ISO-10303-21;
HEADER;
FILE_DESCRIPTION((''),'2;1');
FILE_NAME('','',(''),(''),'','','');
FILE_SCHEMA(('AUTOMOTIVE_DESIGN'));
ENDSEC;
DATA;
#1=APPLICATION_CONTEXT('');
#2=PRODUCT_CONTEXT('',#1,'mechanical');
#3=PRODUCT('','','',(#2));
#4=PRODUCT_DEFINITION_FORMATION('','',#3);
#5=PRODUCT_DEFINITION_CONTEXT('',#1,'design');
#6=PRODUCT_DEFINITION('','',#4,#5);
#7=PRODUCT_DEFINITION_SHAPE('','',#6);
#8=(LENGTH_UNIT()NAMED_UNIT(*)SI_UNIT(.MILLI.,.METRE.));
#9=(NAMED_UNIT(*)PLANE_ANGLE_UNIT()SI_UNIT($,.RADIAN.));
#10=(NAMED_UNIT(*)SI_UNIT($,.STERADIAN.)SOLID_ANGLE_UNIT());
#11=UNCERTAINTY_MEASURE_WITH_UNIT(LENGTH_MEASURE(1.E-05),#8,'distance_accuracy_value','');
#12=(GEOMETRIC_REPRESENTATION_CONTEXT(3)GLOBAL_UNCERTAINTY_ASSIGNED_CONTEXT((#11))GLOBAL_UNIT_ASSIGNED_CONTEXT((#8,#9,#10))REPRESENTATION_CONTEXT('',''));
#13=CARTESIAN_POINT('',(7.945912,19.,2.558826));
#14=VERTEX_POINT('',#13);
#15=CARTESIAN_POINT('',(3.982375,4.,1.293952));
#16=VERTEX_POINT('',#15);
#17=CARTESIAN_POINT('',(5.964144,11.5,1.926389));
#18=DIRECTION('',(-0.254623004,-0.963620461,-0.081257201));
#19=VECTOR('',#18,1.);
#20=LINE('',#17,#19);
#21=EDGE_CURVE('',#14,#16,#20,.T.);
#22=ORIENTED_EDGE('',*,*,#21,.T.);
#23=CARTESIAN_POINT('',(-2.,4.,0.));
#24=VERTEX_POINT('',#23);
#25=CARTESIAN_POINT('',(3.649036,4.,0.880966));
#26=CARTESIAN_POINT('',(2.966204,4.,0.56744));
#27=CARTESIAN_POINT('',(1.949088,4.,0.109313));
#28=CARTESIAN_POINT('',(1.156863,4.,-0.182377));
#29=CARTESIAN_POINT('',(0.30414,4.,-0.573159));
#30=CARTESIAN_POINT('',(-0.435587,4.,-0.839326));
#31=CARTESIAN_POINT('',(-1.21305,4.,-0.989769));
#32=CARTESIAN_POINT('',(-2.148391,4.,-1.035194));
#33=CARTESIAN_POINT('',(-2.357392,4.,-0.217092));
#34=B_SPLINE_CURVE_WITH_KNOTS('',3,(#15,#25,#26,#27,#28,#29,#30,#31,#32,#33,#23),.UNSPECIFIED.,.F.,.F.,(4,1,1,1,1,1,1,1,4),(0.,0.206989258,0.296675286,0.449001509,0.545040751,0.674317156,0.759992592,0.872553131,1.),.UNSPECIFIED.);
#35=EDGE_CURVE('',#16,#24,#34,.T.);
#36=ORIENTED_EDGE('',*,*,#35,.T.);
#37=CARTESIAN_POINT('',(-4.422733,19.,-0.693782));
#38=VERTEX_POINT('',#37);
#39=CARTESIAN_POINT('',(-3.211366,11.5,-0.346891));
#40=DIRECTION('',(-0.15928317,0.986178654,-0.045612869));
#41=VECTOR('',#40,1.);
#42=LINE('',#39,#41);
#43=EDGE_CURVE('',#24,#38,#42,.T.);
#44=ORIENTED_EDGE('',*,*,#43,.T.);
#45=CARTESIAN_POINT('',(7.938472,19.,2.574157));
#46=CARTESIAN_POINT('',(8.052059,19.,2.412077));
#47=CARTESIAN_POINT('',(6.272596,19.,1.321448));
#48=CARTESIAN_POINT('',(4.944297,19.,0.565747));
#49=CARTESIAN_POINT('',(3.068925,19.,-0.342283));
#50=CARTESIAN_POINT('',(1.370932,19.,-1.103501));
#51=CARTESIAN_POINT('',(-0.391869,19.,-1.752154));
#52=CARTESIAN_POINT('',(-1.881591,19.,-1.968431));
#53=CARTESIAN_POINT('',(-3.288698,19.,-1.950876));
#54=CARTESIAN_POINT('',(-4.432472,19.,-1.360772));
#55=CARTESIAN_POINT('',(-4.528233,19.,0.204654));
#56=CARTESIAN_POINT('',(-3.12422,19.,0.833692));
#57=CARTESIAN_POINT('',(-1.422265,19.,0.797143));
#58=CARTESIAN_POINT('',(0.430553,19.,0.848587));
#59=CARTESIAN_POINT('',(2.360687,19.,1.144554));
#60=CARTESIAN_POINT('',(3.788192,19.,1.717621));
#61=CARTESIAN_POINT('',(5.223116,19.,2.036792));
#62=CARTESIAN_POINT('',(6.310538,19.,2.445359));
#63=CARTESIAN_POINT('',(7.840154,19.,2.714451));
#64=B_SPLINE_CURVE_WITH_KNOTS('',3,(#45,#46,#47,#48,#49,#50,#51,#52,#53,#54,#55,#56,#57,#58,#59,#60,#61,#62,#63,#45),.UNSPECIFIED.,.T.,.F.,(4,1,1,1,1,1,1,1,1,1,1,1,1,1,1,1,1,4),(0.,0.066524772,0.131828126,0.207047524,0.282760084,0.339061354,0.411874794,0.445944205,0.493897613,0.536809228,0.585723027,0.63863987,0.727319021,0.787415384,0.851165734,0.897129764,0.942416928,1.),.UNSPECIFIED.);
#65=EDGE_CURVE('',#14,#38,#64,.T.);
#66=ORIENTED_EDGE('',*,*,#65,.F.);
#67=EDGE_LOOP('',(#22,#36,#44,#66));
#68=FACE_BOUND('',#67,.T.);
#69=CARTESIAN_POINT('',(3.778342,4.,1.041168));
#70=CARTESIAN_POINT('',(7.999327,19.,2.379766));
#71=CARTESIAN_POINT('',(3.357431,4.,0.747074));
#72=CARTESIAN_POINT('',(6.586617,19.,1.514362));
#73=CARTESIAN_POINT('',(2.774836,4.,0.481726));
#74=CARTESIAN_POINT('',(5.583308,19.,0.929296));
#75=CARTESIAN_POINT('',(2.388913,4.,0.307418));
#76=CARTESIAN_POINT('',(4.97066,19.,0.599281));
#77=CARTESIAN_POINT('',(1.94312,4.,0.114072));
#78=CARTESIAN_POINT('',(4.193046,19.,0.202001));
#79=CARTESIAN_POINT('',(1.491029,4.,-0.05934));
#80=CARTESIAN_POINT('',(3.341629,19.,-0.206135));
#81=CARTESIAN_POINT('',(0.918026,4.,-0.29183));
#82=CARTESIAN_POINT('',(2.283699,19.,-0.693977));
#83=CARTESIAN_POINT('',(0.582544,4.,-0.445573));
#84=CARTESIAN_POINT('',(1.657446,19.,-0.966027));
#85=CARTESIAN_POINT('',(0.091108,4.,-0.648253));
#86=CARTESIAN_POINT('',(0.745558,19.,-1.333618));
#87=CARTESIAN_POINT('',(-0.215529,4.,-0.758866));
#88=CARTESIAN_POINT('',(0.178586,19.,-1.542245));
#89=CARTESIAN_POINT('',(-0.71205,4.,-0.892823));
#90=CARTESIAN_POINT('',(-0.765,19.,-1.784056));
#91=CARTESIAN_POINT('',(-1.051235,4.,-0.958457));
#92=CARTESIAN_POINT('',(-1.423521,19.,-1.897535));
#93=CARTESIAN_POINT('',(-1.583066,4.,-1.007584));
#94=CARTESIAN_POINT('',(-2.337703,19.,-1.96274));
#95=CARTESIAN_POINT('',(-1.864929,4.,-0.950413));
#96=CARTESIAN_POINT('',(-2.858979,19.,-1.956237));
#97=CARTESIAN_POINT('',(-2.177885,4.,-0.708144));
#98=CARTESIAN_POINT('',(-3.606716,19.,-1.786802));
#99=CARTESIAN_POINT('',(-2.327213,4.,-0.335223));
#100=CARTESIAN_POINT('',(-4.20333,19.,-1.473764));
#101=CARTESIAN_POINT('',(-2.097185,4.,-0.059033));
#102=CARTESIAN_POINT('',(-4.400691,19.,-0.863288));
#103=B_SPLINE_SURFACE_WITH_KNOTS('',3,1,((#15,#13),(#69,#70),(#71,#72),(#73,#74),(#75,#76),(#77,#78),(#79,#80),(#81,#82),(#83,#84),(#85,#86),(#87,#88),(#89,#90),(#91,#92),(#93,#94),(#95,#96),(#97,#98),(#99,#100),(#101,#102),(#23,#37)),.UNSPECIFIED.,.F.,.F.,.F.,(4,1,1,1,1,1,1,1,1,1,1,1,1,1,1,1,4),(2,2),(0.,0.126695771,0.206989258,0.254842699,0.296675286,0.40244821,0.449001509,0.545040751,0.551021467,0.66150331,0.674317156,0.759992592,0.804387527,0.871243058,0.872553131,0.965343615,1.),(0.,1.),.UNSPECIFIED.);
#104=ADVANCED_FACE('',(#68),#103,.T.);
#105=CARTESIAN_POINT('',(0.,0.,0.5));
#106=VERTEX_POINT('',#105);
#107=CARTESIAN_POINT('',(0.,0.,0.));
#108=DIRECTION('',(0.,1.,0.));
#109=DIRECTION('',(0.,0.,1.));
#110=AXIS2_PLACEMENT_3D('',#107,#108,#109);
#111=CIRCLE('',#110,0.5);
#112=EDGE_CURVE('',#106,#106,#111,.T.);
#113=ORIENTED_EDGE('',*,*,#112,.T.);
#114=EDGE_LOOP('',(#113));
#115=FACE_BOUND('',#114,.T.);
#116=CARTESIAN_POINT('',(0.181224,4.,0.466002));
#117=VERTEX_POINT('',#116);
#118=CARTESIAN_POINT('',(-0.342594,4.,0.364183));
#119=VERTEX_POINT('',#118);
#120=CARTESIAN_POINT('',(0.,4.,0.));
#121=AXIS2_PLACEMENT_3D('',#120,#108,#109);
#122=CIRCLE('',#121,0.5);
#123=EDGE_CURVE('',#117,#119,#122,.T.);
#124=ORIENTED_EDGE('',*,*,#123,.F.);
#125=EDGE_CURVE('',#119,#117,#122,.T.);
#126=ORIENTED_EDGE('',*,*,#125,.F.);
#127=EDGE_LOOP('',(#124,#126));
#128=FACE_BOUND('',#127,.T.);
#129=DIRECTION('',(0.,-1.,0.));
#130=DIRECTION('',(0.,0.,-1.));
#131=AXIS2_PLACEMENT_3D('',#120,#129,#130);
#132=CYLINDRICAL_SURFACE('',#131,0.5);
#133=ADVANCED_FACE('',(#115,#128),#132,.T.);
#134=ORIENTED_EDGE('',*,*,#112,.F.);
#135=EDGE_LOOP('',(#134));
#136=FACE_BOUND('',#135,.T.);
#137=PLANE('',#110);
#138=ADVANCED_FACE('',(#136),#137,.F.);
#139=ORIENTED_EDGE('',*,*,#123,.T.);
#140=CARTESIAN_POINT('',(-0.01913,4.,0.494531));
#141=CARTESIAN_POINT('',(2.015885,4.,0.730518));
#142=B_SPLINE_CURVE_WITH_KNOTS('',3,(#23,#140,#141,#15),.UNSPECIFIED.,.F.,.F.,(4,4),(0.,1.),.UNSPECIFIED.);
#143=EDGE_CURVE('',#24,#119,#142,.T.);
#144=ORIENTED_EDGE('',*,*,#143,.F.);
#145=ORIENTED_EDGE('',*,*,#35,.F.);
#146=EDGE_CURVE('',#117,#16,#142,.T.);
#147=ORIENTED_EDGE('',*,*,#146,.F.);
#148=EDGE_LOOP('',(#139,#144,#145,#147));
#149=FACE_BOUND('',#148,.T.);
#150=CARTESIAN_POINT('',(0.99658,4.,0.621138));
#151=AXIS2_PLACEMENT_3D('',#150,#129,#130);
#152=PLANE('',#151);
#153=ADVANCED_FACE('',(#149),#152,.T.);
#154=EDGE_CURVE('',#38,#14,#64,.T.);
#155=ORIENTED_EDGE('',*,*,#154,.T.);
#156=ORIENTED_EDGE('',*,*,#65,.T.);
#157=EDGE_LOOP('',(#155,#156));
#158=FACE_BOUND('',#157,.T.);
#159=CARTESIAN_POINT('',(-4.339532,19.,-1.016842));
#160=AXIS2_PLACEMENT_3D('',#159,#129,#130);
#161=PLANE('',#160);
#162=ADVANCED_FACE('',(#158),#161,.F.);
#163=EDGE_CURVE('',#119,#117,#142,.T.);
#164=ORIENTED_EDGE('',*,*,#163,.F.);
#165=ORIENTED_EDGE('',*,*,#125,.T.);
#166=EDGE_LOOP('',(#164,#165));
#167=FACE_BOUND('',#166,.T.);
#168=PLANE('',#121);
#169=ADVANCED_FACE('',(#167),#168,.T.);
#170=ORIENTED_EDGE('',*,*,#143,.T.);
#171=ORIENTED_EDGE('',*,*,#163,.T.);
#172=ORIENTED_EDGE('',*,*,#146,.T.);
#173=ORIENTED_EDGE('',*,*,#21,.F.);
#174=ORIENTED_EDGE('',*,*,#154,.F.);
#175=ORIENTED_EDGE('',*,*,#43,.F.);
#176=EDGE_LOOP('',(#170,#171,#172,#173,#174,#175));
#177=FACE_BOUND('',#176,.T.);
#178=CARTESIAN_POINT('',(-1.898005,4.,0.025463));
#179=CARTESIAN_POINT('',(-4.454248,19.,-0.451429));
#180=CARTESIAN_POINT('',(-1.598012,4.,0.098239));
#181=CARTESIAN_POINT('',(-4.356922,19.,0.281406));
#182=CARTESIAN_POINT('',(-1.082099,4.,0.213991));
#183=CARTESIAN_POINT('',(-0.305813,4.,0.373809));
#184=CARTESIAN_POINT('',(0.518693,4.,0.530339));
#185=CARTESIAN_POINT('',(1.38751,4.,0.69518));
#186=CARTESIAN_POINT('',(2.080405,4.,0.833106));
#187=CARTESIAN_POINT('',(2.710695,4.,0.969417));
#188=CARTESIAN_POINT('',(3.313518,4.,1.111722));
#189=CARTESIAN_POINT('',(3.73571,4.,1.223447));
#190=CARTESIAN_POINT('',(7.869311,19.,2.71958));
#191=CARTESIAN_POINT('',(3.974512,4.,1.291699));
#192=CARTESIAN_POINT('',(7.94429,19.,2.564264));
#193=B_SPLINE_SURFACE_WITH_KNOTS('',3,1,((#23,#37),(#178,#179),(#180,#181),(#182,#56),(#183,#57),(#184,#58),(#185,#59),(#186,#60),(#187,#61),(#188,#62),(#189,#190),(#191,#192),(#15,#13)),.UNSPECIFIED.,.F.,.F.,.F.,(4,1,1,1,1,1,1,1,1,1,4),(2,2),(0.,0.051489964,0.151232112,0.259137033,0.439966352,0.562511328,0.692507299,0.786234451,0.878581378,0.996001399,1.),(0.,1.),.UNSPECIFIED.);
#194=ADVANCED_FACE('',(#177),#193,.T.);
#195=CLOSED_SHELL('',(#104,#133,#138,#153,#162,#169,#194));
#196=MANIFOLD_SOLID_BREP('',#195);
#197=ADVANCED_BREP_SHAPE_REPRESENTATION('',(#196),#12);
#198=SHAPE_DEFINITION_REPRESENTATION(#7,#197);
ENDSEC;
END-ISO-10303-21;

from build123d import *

# Parameters (mm, degrees)
SKETCH1_R           = 0.5
BOSS_EXTRUDE1_DEPTH = 4


with BuildPart() as part:
    # Sketch1 → Boss-Extrude1 (new body)
    with BuildSketch(Plane(origin=(0, 0, 0), x_dir=(1, 0, 0), z_dir=(0, 1, 0))):
        with Locations(Location((0, 0, 0), (0, 0, 270))):
            Circle(SKETCH1_R)
    extrude(amount=BOSS_EXTRUDE1_DEPTH)

    # Loft1: read off the stored shape, not the designer's step
    # Loft1: loft between two sections, ruled curve by curve
    loft1_from = [
        Edge.make_bspline([(3.982375398, 4, 1.293952205), (3.778342255, 4, 1.041167834), (3.35743147, 4, 0.747073774), (2.774835702, 4, 0.481725971), (2.388912903, 4, 0.307417574), (1.943119665, 4, 0.114072033), (1.491029323, 4, -0.05934005), (0.918025904, 4, -0.291830044), (0.582544384, 4, -0.445572937), (0.091107981, 4, -0.648252812), (-0.215529223, 4, -0.758866155), (-0.712050383, 4, -0.892823244), (-1.051235123, 4, -0.958457066), (-1.583065933, 4, -1.00758396), (-1.864928757, 4, -0.950412973), (-2.177884928, 4, -0.708144109), (-2.327212912, 4, -0.335223441), (-2.097184928, 4, -0.059033354), (-2, 4, 0)], [0, 0, 0, 0, 0.126695771, 0.206989258, 0.254842699, 0.296675286, 0.40244821, 0.449001509, 0.545040751, 0.551021467, 0.66150331, 0.674317156, 0.759992592, 0.804387527, 0.871243058, 0.872553131, 0.965343615, 1, 1, 1, 1], 3),
        Edge.make_bspline([(-2, 4, 0), (-1.898005082, 4, 0.025463399), (-1.598012325, 4, 0.098239141), (-1.082098728, 4, 0.213990908), (-0.305813383, 4, 0.373809131), (0.518693331, 4, 0.530338625), (1.38750976, 4, 0.695180106), (2.080405352, 4, 0.833106398), (2.710695257, 4, 0.969417149), (3.313517993, 4, 1.111722031), (3.735710336, 4, 1.223446834), (3.974512186, 4, 1.291699256), (3.982375398, 4, 1.293952205)], [0, 0, 0, 0, 0.051489964, 0.151232112, 0.259137033, 0.439966352, 0.562511328, 0.692507299, 0.786234451, 0.878581378, 0.996001399, 1, 1, 1, 1], 3),
    ]
    loft1_to = [
        Edge.make_bspline([(7.945912088, 19, 2.558825735), (7.999326678, 19, 2.379766219), (6.586617231, 19, 1.514362157), (5.583308433, 19, 0.929295889), (4.970659737, 19, 0.599281473), (4.193046499, 19, 0.202001465), (3.341628587, 19, -0.206134907), (2.283698675, 19, -0.693976723), (1.657446394, 19, -0.966026664), (0.745558302, 19, -1.333617961), (0.178585745, 19, -1.542245386), (-0.764999991, 19, -1.784056092), (-1.423521481, 19, -1.897535409), (-2.337702573, 19, -1.96274037), (-2.858978808, 19, -1.956236967), (-3.606715655, 19, -1.786802244), (-4.20333017, 19, -1.473764254), (-4.400691171, 19, -0.863287732), (-4.422732973, 19, -0.693782032)], [0, 0, 0, 0, 0.126695771, 0.206989258, 0.254842699, 0.296675286, 0.40244821, 0.449001509, 0.545040751, 0.551021467, 0.66150331, 0.674317156, 0.759992592, 0.804387527, 0.871243058, 0.872553131, 0.965343615, 1, 1, 1, 1], 3),
        Edge.make_bspline([(-4.422732973, 19, -0.693782032), (-4.454247575, 19, -0.451428682), (-4.356921525, 19, 0.281406104), (-3.124219807, 19, 0.833691628), (-1.42226489, 19, 0.797143302), (0.430553453, 19, 0.848586825), (2.360686602, 19, 1.14455408), (3.788192091, 19, 1.717620789), (5.223115534, 19, 2.036792165), (6.310537615, 19, 2.445358722), (7.869311301, 19, 2.719580004), (7.944289787, 19, 2.564264106), (7.945912088, 19, 2.558825735)], [0, 0, 0, 0, 0.051489964, 0.151232112, 0.259137033, 0.439966352, 0.562511328, 0.692507299, 0.786234451, 0.878581378, 0.996001399, 1, 1, 1, 1], 3),
    ]
    loft1 = Solid(Shell([*[Face.make_surface_from_curves(loft1_from[k], loft1_to[k]) for k in range(2)], Face(Wire(loft1_from)), Face(Wire(loft1_to))]))
    add(loft1)


solid = part.part
